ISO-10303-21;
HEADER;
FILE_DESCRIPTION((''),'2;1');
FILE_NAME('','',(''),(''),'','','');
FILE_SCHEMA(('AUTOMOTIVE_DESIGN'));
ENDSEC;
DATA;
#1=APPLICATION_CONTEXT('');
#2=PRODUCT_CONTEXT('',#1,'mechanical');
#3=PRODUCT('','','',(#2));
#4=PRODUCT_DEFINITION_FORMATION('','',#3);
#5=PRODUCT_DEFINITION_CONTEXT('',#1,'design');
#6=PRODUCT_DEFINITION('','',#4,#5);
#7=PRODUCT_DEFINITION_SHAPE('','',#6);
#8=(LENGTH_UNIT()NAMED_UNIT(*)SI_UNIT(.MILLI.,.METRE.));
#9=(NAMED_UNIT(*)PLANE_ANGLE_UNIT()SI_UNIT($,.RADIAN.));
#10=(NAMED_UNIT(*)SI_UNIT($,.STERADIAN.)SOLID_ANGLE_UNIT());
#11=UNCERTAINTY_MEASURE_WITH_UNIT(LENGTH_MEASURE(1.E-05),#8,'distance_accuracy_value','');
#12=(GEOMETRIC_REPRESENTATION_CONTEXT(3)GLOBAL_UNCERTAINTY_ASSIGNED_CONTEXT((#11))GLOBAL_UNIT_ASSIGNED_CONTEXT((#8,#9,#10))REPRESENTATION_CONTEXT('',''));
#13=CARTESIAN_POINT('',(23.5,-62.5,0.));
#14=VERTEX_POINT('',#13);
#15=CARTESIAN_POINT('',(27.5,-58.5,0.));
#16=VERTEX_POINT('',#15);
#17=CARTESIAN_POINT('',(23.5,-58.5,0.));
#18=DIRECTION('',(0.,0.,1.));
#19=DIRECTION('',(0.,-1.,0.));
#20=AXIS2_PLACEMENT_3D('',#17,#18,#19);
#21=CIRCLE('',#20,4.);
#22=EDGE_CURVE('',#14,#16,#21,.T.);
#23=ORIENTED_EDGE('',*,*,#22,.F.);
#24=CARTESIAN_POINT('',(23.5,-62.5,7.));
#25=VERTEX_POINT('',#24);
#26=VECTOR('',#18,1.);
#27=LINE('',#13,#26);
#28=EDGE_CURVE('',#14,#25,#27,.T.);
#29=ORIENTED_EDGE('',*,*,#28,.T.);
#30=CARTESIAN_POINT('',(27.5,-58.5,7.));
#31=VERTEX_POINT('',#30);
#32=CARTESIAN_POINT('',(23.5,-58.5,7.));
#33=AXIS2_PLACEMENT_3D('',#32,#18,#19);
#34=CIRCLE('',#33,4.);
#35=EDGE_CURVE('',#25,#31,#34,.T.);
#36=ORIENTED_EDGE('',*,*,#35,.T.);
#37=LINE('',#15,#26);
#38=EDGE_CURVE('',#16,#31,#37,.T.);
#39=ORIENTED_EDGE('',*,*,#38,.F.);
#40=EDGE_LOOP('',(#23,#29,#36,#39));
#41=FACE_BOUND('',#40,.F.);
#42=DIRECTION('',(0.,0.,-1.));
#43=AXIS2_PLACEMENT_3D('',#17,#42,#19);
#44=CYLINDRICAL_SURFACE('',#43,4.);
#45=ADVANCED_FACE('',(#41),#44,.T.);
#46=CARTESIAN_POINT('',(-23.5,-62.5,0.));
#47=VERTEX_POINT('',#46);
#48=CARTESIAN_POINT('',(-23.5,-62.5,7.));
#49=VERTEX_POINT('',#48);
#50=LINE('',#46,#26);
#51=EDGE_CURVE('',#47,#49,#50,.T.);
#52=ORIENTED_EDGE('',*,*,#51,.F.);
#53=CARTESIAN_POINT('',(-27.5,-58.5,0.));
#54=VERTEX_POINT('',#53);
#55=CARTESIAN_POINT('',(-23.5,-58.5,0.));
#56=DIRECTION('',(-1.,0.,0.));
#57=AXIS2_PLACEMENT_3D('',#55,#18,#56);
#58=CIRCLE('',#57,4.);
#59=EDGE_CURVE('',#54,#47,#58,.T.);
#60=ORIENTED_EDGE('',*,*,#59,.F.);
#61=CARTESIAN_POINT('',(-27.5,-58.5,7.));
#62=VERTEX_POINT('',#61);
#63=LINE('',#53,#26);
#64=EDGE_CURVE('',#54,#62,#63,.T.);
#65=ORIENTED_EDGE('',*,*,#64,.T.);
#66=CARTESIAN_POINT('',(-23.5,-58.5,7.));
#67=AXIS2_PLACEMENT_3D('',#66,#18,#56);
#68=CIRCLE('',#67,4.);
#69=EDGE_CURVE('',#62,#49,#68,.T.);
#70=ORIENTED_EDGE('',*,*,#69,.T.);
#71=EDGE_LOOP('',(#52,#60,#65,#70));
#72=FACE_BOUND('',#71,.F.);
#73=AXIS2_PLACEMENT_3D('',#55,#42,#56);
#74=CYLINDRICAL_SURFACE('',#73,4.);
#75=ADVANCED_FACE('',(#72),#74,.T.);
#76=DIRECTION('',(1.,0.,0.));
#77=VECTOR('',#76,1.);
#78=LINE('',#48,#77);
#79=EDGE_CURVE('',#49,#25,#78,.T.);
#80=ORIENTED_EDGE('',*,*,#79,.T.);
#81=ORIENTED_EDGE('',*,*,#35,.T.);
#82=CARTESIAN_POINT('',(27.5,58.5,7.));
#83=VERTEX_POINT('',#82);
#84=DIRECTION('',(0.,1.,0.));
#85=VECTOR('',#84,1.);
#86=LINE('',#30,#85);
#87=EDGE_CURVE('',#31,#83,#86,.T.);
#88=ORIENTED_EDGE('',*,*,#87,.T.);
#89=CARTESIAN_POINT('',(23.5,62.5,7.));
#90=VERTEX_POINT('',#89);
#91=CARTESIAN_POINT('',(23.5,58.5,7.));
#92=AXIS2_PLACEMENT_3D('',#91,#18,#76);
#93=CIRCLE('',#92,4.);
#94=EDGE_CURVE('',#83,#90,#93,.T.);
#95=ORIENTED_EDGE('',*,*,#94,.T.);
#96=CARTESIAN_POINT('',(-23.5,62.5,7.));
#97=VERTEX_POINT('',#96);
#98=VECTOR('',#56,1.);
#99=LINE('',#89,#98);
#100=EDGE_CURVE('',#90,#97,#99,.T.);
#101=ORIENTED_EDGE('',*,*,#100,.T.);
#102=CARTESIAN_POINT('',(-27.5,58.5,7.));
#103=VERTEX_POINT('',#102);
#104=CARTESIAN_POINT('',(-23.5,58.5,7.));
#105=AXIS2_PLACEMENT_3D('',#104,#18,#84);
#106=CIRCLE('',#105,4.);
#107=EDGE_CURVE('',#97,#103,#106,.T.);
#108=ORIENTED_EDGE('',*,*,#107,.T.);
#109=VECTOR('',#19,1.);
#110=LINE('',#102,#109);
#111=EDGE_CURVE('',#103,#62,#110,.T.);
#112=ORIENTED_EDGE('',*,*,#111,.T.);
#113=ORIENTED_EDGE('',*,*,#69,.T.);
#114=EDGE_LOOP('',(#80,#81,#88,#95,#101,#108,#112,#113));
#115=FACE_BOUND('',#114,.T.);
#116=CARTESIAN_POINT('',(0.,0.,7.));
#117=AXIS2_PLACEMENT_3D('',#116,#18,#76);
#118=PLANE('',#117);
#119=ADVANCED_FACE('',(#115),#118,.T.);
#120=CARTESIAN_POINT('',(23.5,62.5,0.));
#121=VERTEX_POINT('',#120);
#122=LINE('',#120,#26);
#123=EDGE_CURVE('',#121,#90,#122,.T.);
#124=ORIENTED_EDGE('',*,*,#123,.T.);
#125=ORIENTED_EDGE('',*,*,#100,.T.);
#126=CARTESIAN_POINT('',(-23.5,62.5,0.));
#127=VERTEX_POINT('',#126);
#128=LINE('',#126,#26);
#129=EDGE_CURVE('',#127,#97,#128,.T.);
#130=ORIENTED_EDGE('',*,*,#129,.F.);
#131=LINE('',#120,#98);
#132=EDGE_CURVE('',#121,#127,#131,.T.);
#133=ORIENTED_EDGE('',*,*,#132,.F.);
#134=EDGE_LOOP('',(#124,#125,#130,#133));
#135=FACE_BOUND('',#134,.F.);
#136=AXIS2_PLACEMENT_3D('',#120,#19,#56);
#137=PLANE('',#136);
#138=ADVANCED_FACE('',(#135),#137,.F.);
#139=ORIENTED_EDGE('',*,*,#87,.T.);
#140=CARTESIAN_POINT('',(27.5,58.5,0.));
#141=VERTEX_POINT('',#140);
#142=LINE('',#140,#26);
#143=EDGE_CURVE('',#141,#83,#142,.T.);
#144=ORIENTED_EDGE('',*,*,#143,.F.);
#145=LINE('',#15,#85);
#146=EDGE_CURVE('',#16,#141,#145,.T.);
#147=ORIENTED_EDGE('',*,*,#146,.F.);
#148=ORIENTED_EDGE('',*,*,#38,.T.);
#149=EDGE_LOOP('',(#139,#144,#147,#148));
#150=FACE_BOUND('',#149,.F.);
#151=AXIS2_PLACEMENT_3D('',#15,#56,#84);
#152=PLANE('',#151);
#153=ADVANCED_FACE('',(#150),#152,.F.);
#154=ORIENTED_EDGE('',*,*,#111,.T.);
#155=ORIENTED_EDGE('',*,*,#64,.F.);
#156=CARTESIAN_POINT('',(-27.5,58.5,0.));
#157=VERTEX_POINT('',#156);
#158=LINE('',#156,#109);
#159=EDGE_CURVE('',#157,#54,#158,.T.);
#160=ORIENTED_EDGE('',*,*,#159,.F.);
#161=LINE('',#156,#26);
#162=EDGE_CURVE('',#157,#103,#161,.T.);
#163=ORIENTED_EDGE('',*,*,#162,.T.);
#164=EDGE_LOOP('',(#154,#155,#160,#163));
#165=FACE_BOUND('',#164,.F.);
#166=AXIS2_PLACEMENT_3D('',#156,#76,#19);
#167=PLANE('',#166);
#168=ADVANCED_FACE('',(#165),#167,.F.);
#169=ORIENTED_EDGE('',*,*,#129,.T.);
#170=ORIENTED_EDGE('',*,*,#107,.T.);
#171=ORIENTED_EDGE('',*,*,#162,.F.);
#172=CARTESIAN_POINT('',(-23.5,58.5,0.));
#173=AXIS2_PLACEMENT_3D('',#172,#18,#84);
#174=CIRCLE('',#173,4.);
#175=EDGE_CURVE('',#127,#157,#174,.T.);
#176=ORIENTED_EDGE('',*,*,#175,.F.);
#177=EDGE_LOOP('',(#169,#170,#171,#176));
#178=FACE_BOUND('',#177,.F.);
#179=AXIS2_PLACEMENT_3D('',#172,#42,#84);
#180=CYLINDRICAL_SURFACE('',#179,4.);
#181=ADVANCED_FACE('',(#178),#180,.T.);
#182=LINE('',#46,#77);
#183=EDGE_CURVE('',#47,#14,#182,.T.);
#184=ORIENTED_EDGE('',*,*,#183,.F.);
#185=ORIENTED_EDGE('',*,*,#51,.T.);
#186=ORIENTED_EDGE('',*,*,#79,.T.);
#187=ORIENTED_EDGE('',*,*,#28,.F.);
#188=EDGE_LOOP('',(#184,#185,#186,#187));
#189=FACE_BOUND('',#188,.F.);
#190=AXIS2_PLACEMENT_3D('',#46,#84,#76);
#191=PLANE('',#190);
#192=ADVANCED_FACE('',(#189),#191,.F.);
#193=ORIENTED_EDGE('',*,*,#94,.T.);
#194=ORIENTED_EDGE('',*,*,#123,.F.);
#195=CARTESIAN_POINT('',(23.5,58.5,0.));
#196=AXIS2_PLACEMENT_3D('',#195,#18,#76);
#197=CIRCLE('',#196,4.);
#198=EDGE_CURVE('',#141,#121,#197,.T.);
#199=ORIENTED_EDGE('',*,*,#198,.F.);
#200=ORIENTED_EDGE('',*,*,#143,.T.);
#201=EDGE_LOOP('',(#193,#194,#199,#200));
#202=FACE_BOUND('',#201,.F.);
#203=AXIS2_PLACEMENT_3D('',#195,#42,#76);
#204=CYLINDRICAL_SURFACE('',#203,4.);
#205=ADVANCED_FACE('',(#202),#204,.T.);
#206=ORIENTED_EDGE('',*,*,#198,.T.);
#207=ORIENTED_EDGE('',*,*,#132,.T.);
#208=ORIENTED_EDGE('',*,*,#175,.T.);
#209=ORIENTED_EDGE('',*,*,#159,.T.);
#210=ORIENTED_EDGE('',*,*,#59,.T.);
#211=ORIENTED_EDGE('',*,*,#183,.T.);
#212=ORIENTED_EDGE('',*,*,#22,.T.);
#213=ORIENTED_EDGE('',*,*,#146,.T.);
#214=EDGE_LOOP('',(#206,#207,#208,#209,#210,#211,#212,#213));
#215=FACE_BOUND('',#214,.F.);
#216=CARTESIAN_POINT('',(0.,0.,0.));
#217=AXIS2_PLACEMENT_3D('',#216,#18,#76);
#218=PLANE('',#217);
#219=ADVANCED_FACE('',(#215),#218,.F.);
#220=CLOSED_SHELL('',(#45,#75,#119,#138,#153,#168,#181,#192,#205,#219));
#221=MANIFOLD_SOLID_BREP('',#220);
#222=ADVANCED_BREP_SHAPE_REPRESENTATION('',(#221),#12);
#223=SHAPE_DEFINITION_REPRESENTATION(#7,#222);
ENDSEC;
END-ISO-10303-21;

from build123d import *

# Parameters (mm, degrees)
F1_DEPTH = 7


# Not quite as in the source:
# - a feature of the source that left no trace in its solid (it failed there, or was rolled back) is left out


with BuildPart() as f1:
    # F0 (on Top) → F1 (new body)
    with BuildSketch(Plane.XY):
        with BuildLine():
            Line((23.5, 62.5), (-23.5, 62.5))
            ThreePointArc((-23.5, 62.5), (-26.3284271247, 61.3284271247), (-27.5, 58.5))
            Line((-27.5, 58.5), (-27.5, -58.5))
            ThreePointArc((-27.5, -58.5), (-26.3284271247, -61.3284271247), (-23.5, -62.5))
            Line((-23.5, -62.5), (23.5, -62.5))
            ThreePointArc((23.5, -62.5), (26.3284271247, -61.3284271247), (27.5, -58.5))
            Line((27.5, -58.5), (27.5, 58.5))
            ThreePointArc((27.5, 58.5), (26.3284271247, 61.3284271247), (23.5, 62.5))
        make_face()
    extrude(amount=F1_DEPTH)


solid = f1.part
